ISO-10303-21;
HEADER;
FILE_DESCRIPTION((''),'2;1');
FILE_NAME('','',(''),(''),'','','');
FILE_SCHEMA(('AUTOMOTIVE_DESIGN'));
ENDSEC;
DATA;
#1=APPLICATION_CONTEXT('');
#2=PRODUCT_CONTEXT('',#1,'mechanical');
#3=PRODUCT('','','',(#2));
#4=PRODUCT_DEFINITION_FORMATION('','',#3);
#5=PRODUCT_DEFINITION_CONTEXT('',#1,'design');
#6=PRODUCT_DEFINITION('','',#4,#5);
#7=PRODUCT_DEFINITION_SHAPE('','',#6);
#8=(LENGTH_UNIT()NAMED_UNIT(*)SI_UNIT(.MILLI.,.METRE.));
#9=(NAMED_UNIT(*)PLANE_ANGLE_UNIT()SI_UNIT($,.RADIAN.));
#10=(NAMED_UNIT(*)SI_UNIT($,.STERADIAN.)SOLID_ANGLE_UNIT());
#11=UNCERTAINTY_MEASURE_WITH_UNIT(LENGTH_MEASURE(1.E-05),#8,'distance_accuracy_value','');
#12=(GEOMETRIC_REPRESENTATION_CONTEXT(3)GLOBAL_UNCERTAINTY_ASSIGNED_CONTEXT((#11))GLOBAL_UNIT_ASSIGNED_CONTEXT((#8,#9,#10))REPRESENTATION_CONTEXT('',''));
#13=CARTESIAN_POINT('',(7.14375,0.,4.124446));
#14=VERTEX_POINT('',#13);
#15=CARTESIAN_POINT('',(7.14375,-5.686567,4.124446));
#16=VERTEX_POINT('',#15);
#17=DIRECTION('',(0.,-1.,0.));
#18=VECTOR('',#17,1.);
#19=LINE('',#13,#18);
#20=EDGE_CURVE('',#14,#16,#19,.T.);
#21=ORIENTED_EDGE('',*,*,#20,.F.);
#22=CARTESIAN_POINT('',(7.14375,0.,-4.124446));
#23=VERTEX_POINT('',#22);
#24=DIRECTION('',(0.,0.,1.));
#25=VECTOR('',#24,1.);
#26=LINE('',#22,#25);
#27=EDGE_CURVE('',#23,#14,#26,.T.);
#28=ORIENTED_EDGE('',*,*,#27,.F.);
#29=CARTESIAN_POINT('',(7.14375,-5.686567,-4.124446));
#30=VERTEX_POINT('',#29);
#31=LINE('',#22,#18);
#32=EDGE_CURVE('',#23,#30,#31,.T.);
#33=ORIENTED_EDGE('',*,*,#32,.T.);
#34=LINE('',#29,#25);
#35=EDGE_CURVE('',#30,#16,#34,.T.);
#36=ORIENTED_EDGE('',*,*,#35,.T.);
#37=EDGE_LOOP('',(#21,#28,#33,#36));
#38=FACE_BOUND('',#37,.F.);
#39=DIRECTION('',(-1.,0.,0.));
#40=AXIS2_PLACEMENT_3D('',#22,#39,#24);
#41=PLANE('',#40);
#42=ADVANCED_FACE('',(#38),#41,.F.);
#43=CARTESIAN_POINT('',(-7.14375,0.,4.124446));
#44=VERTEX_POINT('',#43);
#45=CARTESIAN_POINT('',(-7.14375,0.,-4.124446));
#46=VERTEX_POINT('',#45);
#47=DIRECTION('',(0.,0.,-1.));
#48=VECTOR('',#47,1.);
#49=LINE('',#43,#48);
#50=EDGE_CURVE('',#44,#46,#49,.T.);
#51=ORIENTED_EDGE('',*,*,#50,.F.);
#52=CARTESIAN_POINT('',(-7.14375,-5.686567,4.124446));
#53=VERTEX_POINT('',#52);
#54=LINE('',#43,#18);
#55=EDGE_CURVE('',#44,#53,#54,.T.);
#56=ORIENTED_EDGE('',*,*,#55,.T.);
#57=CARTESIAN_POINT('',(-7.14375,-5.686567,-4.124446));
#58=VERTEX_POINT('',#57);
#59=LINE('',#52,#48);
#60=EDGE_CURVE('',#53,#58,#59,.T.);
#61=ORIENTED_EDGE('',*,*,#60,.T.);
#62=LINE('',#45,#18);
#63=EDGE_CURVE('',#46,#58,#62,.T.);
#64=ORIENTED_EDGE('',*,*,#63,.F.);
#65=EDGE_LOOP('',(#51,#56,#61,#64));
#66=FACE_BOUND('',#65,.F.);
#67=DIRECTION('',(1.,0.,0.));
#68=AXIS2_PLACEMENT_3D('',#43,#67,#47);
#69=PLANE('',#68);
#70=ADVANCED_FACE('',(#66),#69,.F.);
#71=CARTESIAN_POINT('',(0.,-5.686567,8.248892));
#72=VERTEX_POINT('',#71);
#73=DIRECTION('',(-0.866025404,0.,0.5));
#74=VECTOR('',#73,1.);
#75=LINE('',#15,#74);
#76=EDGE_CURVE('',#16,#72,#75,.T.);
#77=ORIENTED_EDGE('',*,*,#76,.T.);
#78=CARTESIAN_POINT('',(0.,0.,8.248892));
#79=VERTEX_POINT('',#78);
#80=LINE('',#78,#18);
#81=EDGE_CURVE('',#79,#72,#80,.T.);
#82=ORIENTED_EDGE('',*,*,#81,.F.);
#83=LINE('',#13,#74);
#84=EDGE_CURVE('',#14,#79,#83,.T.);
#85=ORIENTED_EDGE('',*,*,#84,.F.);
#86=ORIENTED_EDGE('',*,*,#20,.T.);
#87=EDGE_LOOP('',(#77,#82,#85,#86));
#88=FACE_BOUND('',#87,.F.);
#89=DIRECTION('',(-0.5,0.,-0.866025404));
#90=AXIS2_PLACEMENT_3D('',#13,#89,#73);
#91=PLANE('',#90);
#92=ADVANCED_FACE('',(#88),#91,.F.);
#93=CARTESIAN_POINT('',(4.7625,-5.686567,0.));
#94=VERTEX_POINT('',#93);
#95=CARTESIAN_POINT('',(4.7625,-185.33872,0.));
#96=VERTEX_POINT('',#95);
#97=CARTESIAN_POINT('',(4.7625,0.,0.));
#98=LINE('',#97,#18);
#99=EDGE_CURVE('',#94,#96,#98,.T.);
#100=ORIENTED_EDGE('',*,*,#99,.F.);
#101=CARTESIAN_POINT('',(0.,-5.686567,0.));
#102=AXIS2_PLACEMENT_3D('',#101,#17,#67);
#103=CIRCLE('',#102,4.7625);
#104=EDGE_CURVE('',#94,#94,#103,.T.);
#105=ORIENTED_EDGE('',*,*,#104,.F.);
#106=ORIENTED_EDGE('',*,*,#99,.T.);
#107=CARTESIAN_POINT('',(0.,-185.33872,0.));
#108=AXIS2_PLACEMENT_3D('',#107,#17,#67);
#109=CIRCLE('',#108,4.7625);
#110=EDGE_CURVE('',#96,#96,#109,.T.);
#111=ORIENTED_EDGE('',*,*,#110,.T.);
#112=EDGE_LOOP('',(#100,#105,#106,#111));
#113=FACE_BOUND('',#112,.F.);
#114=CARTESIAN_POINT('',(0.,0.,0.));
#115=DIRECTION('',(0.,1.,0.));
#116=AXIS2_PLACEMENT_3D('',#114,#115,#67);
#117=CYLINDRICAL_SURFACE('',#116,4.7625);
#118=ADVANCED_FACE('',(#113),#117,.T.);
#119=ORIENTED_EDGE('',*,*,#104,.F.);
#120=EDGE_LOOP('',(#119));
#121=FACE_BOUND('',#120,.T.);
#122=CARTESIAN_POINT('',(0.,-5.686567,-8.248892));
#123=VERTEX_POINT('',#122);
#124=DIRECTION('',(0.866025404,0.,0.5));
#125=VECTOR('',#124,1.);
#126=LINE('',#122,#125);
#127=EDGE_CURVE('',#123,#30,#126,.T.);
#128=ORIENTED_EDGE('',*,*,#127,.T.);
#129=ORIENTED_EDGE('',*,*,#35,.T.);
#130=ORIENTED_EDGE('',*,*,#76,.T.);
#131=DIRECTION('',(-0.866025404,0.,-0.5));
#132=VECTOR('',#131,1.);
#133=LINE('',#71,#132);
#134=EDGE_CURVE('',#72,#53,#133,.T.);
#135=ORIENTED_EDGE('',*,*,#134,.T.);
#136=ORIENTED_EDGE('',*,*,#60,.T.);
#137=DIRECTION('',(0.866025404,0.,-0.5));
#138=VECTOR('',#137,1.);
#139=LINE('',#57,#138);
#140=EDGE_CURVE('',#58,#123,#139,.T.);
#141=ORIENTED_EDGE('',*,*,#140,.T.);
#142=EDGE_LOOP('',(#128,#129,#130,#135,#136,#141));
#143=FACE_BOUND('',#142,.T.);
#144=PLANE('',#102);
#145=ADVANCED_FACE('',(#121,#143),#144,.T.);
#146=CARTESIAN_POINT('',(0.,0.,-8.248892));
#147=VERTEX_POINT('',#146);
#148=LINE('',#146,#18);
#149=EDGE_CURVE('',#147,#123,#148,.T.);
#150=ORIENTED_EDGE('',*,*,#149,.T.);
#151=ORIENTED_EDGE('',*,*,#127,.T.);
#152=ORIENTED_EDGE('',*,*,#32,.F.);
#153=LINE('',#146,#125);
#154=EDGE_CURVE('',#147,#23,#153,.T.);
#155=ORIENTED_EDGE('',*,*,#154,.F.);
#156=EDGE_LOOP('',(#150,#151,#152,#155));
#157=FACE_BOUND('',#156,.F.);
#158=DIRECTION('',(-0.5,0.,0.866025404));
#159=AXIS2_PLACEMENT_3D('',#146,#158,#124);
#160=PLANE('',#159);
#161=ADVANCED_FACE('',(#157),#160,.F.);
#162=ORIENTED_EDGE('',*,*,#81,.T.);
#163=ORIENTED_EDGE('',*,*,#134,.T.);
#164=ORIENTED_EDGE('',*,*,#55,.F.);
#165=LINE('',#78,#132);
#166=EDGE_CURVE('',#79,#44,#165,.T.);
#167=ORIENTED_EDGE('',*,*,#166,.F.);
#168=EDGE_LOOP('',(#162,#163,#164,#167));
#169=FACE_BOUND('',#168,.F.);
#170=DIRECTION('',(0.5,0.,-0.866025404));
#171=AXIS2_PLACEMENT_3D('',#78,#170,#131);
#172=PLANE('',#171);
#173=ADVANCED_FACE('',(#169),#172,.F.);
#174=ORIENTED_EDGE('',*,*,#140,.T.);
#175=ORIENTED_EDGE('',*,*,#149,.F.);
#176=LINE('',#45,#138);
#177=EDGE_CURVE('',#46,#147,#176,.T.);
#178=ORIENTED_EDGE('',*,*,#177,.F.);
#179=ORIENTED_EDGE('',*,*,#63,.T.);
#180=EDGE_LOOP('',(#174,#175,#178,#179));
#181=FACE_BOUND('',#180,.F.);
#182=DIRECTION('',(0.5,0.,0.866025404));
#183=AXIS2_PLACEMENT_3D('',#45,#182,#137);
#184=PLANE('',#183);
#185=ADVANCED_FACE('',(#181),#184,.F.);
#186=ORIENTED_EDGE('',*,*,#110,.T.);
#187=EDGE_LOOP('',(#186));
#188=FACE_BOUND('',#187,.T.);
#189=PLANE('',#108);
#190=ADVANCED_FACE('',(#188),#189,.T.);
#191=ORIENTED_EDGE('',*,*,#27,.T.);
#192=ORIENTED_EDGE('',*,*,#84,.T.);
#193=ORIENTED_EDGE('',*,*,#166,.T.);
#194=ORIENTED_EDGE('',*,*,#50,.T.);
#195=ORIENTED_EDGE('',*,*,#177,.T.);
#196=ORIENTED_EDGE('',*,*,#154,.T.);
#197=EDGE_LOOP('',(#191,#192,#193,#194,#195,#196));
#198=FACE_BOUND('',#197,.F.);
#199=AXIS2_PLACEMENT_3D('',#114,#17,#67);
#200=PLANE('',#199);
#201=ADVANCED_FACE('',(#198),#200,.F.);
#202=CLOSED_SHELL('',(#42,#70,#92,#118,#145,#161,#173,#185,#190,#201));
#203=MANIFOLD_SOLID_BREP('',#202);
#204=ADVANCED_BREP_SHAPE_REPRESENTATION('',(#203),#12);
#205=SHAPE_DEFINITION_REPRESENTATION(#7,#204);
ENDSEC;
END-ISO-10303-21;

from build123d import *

# Parameters (mm, degrees)
F0_R     = 4.7625
F1_DEPTH = 185.33872
F2_DEPTH = 5.6865671642


# Not quite as in the source:
# - a length typed as a fraction of an inch, garbled in the dataset ("3 / 203.2 mm" for 3/8 in), is restored


with BuildPart() as f1:
    # F0 (on Front) → F1 (new body)
    with BuildSketch(Plane.XZ):
        Circle(F0_R)
    extrude(amount=F1_DEPTH)

    # F0 (on Front) → F2 (join)
    with BuildSketch(Plane.XZ):
        Polygon((7.14375, -4.1244459855), (7.14375, 4.1244459855), (0, 8.248891971), (-7.14375, 4.1244459855), (-7.14375, -4.1244459855), (0, -8.248891971), align=None)
        Circle(F0_R, mode=Mode.SUBTRACT)
    extrude(amount=F2_DEPTH)


solid = f1.part
